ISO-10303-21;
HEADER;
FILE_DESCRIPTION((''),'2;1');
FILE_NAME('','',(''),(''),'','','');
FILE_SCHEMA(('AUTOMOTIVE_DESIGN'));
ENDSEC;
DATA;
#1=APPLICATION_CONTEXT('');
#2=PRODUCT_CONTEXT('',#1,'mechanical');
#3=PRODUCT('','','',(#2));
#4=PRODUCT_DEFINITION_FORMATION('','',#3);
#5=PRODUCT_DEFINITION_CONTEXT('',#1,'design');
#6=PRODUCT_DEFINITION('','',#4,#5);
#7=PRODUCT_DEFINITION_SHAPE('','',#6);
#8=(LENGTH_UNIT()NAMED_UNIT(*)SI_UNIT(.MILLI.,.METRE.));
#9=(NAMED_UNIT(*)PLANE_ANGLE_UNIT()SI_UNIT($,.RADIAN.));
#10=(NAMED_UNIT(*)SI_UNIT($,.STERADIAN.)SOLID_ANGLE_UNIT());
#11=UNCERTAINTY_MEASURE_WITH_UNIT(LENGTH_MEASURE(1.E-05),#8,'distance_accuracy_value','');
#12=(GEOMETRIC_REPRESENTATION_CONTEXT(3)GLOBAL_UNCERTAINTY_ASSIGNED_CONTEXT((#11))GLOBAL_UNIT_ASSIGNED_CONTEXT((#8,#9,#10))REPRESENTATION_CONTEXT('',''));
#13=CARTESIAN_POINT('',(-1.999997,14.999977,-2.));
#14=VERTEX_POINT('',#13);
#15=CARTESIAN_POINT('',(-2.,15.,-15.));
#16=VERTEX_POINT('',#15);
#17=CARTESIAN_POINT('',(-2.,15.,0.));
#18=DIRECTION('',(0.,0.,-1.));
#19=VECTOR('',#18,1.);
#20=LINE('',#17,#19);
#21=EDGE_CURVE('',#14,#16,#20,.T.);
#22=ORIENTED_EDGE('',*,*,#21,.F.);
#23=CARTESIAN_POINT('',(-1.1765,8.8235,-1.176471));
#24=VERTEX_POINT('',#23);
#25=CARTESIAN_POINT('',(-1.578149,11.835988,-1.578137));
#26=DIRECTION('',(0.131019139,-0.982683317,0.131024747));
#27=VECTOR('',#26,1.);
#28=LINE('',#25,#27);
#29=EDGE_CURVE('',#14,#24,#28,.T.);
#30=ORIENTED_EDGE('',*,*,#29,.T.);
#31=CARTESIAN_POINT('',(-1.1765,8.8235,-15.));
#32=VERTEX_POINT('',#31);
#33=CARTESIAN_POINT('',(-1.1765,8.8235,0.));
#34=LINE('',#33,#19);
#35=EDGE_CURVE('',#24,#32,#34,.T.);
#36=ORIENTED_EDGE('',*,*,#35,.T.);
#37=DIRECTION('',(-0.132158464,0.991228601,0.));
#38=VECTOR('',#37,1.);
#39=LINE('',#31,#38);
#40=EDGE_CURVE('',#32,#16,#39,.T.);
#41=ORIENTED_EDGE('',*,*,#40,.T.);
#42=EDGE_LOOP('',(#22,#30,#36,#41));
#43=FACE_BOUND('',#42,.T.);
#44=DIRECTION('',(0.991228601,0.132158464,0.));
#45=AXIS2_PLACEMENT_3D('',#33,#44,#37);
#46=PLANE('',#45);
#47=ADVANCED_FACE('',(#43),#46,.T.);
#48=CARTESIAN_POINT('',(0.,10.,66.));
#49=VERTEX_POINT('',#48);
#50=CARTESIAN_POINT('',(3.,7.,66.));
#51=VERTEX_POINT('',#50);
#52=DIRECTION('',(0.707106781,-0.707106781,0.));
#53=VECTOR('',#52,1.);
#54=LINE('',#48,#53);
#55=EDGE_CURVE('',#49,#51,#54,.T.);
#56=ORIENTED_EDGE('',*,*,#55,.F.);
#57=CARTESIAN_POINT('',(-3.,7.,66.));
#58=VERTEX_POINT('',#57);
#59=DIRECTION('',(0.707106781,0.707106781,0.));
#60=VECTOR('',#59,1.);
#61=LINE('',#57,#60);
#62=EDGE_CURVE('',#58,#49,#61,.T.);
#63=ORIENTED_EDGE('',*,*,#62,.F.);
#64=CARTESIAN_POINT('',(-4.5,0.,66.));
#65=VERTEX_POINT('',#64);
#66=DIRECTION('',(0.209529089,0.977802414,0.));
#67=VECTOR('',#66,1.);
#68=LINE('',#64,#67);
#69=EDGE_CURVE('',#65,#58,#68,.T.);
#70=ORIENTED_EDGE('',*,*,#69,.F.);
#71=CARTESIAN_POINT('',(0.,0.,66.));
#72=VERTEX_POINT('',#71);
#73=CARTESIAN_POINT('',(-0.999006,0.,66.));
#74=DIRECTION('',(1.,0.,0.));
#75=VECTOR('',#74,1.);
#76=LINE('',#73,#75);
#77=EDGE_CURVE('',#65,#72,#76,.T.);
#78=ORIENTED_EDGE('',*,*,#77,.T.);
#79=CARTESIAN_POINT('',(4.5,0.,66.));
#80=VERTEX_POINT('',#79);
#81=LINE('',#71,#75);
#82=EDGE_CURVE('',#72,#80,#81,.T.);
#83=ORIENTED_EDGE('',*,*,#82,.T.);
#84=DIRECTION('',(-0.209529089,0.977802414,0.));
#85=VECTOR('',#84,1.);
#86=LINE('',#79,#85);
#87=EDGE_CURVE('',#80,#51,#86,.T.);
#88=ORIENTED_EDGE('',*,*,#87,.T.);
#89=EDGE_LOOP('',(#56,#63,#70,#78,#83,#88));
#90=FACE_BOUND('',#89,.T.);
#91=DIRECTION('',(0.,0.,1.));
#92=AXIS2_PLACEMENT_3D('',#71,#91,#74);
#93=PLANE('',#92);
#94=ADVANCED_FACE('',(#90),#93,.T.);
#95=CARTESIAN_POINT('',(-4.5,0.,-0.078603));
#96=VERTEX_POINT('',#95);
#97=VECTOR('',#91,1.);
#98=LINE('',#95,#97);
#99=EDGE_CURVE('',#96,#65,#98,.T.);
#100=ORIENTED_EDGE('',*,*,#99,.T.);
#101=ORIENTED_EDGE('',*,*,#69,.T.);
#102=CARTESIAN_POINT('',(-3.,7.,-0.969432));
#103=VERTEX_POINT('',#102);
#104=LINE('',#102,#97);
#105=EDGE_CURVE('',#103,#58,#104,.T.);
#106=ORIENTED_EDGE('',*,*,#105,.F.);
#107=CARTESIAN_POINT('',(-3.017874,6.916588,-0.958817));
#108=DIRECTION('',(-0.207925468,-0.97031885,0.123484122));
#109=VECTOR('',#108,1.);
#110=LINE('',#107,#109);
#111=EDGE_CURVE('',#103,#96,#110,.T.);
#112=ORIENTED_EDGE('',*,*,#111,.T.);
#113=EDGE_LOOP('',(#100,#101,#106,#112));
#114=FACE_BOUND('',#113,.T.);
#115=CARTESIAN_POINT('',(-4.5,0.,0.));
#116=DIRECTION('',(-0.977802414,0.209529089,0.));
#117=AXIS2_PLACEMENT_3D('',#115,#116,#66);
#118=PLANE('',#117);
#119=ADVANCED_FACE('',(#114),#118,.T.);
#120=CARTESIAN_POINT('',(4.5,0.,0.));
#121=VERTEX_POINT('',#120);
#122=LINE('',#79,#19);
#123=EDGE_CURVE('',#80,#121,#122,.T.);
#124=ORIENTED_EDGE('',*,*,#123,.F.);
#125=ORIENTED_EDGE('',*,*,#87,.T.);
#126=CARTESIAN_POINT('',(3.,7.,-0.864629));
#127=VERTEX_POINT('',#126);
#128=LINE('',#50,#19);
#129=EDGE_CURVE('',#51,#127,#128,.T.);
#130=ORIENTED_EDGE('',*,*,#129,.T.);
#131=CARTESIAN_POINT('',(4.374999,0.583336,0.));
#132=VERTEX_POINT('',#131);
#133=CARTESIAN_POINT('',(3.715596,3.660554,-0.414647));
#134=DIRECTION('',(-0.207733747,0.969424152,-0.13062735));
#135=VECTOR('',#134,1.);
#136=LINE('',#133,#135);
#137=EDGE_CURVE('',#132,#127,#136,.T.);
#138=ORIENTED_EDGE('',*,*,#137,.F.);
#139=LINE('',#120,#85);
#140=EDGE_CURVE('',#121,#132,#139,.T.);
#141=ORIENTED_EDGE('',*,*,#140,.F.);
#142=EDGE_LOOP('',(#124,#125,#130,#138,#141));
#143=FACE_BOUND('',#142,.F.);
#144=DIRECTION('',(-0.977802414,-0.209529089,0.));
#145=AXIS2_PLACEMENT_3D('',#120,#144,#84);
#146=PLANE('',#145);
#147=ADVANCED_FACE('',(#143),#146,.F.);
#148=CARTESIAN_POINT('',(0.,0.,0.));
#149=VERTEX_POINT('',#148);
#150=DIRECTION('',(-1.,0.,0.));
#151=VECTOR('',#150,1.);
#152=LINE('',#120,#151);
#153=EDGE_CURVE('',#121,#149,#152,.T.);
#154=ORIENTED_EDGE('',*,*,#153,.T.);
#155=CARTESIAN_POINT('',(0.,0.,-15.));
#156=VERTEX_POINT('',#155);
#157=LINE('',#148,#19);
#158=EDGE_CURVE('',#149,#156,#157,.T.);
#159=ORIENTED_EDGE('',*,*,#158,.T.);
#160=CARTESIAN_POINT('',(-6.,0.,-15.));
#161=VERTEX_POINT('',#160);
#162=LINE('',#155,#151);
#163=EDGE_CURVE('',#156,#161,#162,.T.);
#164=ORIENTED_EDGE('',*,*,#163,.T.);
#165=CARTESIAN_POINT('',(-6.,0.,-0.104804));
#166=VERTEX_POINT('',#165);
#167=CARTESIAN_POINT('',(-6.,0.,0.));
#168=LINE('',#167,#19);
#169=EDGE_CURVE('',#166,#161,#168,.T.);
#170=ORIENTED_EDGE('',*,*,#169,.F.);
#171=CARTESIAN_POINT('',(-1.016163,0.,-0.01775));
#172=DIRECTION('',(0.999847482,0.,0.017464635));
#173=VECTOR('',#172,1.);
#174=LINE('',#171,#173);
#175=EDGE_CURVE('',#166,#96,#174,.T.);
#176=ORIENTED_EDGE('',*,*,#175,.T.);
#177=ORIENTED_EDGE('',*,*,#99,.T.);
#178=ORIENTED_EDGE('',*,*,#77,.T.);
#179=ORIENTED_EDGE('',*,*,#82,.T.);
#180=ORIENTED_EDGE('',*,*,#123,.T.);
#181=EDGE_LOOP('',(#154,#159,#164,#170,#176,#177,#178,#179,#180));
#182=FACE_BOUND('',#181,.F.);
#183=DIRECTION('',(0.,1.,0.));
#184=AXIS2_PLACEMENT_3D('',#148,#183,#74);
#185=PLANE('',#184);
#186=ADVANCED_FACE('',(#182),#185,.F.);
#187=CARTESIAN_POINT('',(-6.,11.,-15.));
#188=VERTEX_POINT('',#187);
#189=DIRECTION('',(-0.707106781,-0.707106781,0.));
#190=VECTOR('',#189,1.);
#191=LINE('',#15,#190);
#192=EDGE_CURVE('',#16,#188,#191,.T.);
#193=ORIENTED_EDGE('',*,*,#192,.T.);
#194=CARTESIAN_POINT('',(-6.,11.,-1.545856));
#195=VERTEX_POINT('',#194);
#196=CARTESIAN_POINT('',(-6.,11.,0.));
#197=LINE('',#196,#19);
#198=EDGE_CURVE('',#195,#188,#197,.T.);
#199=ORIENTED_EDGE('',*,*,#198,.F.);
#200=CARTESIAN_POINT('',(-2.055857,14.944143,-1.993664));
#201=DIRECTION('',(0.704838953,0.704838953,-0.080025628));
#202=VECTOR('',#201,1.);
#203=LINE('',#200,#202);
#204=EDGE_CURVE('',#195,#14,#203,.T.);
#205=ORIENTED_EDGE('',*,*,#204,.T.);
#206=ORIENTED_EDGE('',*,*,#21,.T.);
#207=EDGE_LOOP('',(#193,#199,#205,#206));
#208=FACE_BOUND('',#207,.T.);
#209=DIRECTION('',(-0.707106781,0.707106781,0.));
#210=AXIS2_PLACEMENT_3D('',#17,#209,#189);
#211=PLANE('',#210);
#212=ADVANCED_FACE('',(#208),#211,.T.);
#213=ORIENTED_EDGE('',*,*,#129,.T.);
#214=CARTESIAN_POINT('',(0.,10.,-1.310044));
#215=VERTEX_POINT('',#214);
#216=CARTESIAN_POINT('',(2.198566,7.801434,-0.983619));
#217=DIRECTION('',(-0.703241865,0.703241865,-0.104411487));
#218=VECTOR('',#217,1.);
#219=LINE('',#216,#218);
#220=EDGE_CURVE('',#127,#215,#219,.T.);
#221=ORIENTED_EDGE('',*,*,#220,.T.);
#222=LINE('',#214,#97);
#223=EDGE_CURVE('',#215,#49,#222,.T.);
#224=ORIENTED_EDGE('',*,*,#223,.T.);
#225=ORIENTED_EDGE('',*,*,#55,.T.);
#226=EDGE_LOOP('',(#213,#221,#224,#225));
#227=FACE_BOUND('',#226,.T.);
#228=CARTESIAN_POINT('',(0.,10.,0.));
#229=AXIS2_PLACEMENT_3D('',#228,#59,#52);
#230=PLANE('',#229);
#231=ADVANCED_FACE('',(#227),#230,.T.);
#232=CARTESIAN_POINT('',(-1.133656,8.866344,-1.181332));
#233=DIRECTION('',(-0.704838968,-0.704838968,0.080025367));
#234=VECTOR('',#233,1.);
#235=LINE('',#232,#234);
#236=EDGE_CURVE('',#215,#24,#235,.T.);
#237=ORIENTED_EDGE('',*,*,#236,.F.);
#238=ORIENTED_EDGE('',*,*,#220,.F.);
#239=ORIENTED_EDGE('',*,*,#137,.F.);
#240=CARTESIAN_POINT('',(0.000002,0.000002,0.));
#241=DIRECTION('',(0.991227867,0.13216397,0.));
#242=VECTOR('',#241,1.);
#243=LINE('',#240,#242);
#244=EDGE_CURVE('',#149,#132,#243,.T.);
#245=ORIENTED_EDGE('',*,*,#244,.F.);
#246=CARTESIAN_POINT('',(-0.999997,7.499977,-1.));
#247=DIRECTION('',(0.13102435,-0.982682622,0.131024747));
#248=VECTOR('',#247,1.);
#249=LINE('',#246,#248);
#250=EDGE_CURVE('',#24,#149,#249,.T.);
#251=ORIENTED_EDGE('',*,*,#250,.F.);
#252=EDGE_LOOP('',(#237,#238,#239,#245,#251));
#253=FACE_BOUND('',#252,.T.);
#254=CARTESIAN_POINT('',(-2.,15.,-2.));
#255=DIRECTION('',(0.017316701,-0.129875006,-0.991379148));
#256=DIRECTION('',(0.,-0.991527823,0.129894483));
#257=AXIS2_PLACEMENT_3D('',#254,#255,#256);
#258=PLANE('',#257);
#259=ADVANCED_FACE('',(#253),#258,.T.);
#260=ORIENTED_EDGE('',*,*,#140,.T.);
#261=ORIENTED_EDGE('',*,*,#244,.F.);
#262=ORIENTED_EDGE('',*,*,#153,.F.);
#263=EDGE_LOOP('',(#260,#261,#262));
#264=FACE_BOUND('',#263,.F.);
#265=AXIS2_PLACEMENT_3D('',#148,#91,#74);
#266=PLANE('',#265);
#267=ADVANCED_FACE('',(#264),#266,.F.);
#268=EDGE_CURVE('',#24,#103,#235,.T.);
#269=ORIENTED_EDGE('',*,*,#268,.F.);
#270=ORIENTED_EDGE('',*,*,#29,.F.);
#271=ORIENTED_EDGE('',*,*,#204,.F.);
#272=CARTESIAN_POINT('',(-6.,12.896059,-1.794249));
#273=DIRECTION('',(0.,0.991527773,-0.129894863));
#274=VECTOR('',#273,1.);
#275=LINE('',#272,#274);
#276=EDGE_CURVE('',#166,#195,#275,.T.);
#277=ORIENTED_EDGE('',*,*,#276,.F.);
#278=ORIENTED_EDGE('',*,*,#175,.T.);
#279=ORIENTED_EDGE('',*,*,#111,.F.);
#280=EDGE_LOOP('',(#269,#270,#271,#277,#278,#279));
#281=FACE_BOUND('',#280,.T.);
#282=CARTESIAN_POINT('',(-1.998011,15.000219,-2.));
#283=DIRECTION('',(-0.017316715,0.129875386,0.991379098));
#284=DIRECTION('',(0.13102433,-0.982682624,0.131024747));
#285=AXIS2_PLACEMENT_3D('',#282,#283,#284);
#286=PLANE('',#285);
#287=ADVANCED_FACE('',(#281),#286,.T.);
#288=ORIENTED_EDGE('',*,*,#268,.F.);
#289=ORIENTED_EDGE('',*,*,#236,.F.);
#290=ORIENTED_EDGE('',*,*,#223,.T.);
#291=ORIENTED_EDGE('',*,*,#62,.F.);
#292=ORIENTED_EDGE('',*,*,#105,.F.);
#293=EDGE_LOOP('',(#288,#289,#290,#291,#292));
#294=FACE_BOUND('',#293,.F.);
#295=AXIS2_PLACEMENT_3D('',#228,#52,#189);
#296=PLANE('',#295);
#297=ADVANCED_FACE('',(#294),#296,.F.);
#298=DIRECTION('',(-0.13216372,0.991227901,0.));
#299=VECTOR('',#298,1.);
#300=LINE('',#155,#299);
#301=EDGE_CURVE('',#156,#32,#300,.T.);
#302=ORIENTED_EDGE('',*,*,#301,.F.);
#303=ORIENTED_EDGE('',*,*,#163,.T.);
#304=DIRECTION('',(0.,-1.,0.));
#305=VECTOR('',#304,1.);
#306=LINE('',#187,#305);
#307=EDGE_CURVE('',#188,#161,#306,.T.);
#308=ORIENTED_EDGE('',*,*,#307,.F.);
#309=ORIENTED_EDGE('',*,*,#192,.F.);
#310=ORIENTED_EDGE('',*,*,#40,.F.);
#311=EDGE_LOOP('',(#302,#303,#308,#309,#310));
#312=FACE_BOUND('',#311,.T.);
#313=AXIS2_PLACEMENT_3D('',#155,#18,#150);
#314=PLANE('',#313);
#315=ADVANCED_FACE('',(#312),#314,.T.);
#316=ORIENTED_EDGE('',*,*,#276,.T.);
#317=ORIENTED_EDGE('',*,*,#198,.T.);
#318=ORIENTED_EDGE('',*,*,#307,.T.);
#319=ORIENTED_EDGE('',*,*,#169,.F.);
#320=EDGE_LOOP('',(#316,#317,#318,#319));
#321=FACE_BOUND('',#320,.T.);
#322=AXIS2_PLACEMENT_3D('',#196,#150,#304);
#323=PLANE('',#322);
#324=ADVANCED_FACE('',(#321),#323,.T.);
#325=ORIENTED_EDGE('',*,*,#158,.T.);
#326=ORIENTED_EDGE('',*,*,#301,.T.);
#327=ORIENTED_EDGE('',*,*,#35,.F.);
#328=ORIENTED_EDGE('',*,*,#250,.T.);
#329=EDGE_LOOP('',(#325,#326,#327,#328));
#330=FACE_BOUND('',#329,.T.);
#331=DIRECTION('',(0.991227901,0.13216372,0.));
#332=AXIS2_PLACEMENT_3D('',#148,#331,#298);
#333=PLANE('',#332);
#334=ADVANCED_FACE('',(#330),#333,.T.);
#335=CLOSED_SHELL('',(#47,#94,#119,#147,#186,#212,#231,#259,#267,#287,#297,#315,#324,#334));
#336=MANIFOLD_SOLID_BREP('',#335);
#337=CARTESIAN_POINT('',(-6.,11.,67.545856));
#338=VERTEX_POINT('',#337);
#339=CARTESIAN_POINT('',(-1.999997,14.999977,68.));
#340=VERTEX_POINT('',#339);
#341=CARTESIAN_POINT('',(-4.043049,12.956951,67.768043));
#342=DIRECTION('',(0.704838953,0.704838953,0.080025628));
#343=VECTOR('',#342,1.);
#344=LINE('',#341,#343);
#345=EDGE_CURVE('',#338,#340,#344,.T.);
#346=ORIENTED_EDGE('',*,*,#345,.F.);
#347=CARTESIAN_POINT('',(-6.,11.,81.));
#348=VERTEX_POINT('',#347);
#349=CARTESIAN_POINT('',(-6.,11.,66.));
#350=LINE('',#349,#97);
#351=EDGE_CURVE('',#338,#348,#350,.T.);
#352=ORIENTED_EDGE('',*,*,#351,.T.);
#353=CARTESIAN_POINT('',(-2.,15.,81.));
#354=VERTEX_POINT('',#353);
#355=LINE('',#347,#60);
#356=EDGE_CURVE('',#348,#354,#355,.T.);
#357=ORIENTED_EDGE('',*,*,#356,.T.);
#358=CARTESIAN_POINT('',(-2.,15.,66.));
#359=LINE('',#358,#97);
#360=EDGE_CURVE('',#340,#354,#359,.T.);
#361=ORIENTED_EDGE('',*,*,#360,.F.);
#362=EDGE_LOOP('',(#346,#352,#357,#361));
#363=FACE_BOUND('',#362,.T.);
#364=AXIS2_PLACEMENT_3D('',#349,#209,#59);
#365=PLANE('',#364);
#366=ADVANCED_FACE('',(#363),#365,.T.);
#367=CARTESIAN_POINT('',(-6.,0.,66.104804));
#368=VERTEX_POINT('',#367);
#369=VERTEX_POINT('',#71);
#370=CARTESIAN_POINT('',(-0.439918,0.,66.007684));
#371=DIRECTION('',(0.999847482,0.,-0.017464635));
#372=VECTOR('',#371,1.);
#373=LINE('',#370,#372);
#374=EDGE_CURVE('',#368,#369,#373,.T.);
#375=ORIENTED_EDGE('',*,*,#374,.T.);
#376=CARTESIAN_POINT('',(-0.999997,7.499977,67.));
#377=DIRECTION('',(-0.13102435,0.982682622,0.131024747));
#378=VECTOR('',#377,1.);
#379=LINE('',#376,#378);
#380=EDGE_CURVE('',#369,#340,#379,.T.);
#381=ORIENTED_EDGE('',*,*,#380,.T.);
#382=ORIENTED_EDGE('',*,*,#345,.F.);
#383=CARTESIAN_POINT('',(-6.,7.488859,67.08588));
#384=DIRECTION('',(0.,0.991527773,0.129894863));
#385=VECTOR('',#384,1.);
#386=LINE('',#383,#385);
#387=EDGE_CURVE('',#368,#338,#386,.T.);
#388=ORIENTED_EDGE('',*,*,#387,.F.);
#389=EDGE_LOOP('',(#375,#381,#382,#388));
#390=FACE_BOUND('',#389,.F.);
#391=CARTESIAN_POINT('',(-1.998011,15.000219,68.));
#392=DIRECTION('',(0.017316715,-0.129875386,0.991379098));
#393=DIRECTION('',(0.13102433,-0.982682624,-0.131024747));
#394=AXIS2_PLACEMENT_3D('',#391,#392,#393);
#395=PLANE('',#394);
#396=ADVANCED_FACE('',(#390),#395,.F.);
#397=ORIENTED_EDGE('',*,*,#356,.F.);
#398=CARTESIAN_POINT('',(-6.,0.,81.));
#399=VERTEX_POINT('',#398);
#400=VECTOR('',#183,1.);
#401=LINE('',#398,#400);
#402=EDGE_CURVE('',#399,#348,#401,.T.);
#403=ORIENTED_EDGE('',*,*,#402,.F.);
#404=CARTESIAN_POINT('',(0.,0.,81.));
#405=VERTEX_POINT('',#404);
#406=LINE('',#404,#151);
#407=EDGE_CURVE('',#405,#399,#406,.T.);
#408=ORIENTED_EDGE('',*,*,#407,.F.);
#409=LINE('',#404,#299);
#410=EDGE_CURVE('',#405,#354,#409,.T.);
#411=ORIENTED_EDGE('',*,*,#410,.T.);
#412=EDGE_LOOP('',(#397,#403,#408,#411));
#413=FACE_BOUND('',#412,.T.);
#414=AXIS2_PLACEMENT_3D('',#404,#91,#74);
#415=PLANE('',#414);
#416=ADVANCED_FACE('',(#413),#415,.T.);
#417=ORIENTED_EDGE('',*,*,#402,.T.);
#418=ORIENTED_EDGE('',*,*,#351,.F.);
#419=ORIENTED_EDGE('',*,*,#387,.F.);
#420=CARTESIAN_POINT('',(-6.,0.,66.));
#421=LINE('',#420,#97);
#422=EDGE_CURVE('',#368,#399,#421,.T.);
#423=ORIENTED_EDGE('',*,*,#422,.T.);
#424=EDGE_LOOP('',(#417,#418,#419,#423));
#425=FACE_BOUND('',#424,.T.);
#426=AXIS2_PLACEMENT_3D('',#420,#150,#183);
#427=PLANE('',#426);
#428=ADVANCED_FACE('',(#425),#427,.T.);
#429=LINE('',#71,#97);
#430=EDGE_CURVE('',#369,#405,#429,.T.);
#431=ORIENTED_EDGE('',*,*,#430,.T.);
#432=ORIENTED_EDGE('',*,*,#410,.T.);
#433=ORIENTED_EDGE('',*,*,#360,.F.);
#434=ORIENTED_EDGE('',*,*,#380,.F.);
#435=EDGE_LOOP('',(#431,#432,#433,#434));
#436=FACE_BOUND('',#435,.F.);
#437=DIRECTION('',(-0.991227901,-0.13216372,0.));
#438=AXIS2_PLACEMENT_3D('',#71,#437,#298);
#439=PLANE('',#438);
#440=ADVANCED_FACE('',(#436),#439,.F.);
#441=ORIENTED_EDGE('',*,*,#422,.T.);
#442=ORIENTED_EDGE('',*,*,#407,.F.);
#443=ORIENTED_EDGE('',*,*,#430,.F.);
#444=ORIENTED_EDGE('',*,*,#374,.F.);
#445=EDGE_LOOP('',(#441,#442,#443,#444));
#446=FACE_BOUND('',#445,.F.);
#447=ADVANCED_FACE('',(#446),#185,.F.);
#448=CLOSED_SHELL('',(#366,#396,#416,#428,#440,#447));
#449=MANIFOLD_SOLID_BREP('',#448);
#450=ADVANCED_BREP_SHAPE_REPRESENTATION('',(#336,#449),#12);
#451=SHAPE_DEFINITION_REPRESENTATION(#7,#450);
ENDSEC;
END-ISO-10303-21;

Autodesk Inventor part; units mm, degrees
ref_plane "YZ Plane" through (0, 0, 0) normal (1, 0, 0) x (0, 1, 0)
ref_plane "XZ Plane" through (0, 0, 0) normal (0, 1, 0) x (-1, 0, 0)
ref_plane "XY Plane" through (0, 0, 0) normal (0, 0, 1) x (1, 0, 0)
sketch "Sketch1" plane through (0, 0, 0) normal (0, 0, 1) x (1, 0, 0)
  line L0 (0, 10) -> (3, 7)
  line L1 (0, 10) -> (4.2426, 10) construction
  line L2 (0, 10) -> (-4.2426, 10) construction
  line L3 (4.5, 0) -> (3, 7)
  line L4 (0, 0) -> (4.5, 0)
  line L5 (0, 10) -> (-3, 7)
  line L6 (0, 10) -> (-4.2426, 10) construction
  line L7 (-4.5, 0) -> (-3, 7)
  line L8 (0, 0) -> (-4.5, 0)
  dimension "d2" = 45
extrude "Extrusion1" add sketch "Sketch1" along normal blind 66
sketch "Sketch2" plane through (0, 0, 66) normal (0, 0, 1) x (1, 0, 0)
  line L0 (0, 0) -> (-6, 0)
  line L1 (-4.5, 0) -> (4.5, 0) projected
  line L2 (-6, 0) -> (-6, 11)
  line L3 (-6, 11) -> (-2, 15)
  line L4 (0, 0) -> (-2, 15)
  dimension "d8" = 6
  dimension "d9" = 11
extrude "Extrusion2" add sketch "Sketch2" along normal blind 15
sketch "Sketch8" plane through (0, 0, 0) normal (0, 0, -1) x (-1, 0, 0)
  line L0 (1.1765, 8.8235) -> (3, 7) projected
  line L1 (3, 7) -> (4.5, 0) projected
  line L2 (6, 0) -> (4.5, 0) projected
  line L3 (6, 11) -> (6, 0) projected
  line L4 (2, 15) -> (6, 11) projected
  line L5 (1.1765, 8.8235) -> (2, 15) projected
  line L6 (0, 0) -> (2, 15) projected
  line L7 (2, 15) -> (6, 11) projected
  line L8 (6, 11) -> (6, 0) projected
  line L9 (6, 0) -> (0, 0) projected
extrude "Extrusion8" add sketch "Sketch8" along normal blind 15
sketch "Sketch13" plane through (0, 0, 81) normal (0.9912279, 0.1321637, 0) x (0, 0, -1)
  line L0 (15, 15.1327) -> (15, 11.6965) projected
  line L1 (15, 15.1327) -> (15, 0)
  line L2 (15, 15.1327) -> (13, 15.1327)
  line L3 (15, 15.1327) -> (0, 15.1327) projected
  line L4 (13, 15.1327) -> (15, 0)
  line L5 (15, 7.3351) -> (15, 0.5947) projected
  line L6 (15, 0.5947) -> (15, 0)
  line L7 (81, 15.1327) -> (96, 15.1327) projected
  line L8 (81, 15.1327) -> (81, 8.9016) projected
  line L9 (81, 0) -> (81, 8.9016) projected
  line L10 (81, 0) -> (96, 0) projected
  line L11 (15, 0) -> (0, 0) projected
  line L12 (15, 8.9016) -> (15, 0) projected
  line L13 (15, 8.9016) -> (15, 15.1327) projected
  line L14 (15, 15.1327) -> (0, 15.1327) projected
  line L15 (81, 15.1327) -> (81, 8.9016) projected
  line L16 (81, 15.1327) -> (83, 15.1327)
  line L17 (81, 15.1327) -> (94, 15.1327) projected
  line L18 (81, 0) -> (96, 0) projected
  line L19 (83, 15.1327) -> (81, 0)
  line L20 (0, 0) -> (0, 15.1327) projected
  line L21 (96, 15.1327) -> (96, 0) projected
  point P0 (2, 15.1327)
  dimension "d42" = 2
  dimension "d43" = 2
extrude "Extrusion11" cut sketch "Sketch13" against normal blind 12.225 contours L0 L1 L4 L2 | L7 L19 L9 L8
sketch "Sketch15" plane through (0, 0, 66) normal (0, 0, 1) x (1, 0, 0)
  line L0 (0, 0) -> (4.5, 0) projected
  line L1 (4.5, 0) -> (3, 7) projected
  line L2 (3, 7) -> (0, 10) projected
  line L3 (0, 10) -> (-3, 7) projected
  line L4 (-3, 7) -> (-4.5, 0) projected
  line L5 (0, 0) -> (-4.5, 0) projected
extrude "Extrusion12" add sketch "Sketch15" against normal up to surface surface through (-2, 15, -2) normal (0.0173167, -0.129875, -0.9913791)
properties part number "inside-join-2"
